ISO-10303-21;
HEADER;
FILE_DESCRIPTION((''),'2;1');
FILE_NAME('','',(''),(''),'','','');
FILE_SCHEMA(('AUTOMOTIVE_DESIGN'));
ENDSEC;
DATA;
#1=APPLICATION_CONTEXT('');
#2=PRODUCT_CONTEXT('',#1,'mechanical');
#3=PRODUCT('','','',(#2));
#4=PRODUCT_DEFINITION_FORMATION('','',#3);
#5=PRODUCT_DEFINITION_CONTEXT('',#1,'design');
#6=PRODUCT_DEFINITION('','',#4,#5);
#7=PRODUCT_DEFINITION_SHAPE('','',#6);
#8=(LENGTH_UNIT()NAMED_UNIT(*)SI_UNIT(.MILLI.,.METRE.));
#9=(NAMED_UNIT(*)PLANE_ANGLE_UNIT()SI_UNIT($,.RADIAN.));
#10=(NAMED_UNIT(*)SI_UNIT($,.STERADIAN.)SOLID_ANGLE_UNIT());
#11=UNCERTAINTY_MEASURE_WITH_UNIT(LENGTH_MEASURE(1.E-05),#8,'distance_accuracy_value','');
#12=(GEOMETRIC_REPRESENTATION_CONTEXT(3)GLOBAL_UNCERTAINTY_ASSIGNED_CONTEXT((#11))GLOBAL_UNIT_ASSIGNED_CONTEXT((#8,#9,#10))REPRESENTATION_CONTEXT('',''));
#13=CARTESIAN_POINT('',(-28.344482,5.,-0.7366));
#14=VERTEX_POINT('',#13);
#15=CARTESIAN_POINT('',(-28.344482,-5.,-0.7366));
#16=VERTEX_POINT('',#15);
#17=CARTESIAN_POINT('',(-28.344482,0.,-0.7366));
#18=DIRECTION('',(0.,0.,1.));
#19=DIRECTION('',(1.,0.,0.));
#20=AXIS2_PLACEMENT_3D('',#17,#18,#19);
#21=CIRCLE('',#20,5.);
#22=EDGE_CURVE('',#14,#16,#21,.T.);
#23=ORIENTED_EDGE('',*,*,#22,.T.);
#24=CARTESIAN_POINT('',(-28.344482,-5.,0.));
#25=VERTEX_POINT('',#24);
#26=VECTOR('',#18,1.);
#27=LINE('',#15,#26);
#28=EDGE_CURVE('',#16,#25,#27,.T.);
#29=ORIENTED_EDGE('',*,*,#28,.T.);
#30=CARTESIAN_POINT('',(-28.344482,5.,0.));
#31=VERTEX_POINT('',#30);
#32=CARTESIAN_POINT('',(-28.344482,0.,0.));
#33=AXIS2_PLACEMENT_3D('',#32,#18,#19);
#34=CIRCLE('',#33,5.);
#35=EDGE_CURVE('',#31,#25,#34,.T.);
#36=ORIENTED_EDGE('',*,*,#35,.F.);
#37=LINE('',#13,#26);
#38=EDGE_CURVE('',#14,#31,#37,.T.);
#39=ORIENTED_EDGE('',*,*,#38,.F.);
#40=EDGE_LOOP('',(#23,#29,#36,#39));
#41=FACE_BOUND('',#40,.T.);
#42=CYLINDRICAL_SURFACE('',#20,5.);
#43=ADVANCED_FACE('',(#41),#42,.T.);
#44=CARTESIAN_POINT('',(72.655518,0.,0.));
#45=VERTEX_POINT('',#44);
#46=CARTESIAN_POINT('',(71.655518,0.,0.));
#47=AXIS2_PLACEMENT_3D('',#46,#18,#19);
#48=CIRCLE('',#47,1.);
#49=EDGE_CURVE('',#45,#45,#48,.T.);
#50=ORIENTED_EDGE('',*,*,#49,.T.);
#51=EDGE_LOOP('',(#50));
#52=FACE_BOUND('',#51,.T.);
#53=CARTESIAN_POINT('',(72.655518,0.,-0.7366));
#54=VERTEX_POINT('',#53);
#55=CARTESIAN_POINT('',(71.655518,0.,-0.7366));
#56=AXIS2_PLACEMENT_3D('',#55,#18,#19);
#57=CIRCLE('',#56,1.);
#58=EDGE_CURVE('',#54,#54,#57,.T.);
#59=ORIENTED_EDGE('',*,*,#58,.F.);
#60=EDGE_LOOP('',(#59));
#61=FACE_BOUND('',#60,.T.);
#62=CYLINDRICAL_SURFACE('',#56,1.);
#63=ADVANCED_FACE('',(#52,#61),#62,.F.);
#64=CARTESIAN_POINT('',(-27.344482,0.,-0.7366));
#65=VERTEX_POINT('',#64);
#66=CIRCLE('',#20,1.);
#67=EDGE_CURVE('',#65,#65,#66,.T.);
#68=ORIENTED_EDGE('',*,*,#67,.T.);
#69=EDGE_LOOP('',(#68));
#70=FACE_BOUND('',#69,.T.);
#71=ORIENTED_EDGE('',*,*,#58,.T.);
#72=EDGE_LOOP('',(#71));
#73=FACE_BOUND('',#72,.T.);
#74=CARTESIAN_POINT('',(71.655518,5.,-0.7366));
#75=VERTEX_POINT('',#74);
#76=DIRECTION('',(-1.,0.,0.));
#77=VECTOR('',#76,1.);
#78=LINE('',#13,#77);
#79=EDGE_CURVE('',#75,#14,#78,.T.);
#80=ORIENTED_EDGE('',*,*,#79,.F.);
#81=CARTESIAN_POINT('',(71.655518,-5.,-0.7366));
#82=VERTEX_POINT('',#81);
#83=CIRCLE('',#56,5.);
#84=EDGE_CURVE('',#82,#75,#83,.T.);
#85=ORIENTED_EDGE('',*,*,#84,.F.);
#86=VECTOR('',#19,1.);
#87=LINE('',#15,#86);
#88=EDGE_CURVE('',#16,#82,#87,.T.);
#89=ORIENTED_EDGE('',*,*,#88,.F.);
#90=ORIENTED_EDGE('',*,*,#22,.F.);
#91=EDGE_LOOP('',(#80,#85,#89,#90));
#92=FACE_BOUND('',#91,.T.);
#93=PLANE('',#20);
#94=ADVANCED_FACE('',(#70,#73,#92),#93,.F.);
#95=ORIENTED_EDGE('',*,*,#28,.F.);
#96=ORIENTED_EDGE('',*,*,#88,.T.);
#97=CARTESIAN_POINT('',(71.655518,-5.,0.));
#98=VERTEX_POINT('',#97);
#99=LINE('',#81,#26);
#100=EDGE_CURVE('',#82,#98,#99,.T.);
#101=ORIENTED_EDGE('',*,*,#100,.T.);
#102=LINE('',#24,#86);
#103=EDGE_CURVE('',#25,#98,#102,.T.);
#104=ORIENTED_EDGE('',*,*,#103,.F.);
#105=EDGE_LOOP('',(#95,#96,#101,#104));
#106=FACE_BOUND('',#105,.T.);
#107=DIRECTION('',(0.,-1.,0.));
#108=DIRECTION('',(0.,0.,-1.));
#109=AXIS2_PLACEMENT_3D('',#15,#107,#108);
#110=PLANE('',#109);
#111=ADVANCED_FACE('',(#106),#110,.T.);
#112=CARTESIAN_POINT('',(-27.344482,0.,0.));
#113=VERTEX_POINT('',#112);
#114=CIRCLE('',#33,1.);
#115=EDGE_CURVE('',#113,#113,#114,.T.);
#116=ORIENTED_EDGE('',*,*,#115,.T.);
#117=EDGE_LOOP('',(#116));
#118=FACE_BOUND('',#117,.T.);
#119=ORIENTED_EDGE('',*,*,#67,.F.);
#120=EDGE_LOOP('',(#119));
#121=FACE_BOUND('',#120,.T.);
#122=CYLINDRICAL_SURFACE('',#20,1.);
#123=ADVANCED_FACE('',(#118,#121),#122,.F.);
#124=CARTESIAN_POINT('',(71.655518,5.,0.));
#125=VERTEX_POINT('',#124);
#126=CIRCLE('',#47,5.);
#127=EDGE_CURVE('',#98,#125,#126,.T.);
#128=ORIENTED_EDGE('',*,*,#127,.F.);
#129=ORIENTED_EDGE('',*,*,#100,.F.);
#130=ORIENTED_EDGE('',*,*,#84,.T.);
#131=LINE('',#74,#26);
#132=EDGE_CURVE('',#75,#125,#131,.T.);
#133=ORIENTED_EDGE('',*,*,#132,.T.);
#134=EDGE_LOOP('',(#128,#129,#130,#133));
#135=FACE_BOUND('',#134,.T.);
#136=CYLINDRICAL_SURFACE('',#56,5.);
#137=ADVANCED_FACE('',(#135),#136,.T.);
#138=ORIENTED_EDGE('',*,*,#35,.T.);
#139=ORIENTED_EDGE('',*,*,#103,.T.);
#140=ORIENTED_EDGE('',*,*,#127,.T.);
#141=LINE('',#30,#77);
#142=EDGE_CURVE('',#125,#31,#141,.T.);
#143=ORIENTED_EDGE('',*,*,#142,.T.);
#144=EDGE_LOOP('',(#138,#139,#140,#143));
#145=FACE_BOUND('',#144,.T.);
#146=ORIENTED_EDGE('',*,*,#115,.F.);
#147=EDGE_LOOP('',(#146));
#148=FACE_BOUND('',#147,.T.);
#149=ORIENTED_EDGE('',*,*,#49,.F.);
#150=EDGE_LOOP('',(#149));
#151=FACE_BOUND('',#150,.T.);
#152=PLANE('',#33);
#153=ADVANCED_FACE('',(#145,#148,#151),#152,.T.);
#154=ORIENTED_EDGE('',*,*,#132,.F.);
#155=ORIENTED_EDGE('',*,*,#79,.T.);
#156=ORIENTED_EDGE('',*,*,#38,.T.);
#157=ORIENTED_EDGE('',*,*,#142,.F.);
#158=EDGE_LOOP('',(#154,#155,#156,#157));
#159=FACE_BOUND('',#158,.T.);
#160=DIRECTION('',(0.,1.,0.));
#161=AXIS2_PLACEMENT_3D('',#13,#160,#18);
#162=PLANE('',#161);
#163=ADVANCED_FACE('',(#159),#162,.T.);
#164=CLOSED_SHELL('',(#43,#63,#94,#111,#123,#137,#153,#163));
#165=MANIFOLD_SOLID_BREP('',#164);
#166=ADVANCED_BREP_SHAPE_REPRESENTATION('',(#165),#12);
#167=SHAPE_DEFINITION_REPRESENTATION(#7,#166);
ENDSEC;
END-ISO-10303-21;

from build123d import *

# Parameters (mm, degrees)
SKETCH1_R          = 1
BASE_FLANGE1_DEPTH = 0.7366


# Sheet-metal steps are written as plain solids
with BuildPart() as part:
    # Sketch1 → Base-Flange1 (new body)
    with BuildSketch(Plane.XY):
        with BuildLine():
            Line((-28.344481605, 5), (71.655518395, 5))
            ThreePointArc((71.655518395, 5), (76.655518395, 0), (71.655518395, -5))
            Line((71.655518395, -5), (-28.344481605, -5))
            ThreePointArc((-28.344481605, -5), (-33.344481605, 0), (-28.344481605, 5))
        make_face()
        with Locations((-28.344481605, 0)):
            Circle(SKETCH1_R, mode=Mode.SUBTRACT)
        with Locations((71.655518395, 0)):
            Circle(SKETCH1_R, mode=Mode.SUBTRACT)
    extrude(amount=-BASE_FLANGE1_DEPTH)


solid = part.part
